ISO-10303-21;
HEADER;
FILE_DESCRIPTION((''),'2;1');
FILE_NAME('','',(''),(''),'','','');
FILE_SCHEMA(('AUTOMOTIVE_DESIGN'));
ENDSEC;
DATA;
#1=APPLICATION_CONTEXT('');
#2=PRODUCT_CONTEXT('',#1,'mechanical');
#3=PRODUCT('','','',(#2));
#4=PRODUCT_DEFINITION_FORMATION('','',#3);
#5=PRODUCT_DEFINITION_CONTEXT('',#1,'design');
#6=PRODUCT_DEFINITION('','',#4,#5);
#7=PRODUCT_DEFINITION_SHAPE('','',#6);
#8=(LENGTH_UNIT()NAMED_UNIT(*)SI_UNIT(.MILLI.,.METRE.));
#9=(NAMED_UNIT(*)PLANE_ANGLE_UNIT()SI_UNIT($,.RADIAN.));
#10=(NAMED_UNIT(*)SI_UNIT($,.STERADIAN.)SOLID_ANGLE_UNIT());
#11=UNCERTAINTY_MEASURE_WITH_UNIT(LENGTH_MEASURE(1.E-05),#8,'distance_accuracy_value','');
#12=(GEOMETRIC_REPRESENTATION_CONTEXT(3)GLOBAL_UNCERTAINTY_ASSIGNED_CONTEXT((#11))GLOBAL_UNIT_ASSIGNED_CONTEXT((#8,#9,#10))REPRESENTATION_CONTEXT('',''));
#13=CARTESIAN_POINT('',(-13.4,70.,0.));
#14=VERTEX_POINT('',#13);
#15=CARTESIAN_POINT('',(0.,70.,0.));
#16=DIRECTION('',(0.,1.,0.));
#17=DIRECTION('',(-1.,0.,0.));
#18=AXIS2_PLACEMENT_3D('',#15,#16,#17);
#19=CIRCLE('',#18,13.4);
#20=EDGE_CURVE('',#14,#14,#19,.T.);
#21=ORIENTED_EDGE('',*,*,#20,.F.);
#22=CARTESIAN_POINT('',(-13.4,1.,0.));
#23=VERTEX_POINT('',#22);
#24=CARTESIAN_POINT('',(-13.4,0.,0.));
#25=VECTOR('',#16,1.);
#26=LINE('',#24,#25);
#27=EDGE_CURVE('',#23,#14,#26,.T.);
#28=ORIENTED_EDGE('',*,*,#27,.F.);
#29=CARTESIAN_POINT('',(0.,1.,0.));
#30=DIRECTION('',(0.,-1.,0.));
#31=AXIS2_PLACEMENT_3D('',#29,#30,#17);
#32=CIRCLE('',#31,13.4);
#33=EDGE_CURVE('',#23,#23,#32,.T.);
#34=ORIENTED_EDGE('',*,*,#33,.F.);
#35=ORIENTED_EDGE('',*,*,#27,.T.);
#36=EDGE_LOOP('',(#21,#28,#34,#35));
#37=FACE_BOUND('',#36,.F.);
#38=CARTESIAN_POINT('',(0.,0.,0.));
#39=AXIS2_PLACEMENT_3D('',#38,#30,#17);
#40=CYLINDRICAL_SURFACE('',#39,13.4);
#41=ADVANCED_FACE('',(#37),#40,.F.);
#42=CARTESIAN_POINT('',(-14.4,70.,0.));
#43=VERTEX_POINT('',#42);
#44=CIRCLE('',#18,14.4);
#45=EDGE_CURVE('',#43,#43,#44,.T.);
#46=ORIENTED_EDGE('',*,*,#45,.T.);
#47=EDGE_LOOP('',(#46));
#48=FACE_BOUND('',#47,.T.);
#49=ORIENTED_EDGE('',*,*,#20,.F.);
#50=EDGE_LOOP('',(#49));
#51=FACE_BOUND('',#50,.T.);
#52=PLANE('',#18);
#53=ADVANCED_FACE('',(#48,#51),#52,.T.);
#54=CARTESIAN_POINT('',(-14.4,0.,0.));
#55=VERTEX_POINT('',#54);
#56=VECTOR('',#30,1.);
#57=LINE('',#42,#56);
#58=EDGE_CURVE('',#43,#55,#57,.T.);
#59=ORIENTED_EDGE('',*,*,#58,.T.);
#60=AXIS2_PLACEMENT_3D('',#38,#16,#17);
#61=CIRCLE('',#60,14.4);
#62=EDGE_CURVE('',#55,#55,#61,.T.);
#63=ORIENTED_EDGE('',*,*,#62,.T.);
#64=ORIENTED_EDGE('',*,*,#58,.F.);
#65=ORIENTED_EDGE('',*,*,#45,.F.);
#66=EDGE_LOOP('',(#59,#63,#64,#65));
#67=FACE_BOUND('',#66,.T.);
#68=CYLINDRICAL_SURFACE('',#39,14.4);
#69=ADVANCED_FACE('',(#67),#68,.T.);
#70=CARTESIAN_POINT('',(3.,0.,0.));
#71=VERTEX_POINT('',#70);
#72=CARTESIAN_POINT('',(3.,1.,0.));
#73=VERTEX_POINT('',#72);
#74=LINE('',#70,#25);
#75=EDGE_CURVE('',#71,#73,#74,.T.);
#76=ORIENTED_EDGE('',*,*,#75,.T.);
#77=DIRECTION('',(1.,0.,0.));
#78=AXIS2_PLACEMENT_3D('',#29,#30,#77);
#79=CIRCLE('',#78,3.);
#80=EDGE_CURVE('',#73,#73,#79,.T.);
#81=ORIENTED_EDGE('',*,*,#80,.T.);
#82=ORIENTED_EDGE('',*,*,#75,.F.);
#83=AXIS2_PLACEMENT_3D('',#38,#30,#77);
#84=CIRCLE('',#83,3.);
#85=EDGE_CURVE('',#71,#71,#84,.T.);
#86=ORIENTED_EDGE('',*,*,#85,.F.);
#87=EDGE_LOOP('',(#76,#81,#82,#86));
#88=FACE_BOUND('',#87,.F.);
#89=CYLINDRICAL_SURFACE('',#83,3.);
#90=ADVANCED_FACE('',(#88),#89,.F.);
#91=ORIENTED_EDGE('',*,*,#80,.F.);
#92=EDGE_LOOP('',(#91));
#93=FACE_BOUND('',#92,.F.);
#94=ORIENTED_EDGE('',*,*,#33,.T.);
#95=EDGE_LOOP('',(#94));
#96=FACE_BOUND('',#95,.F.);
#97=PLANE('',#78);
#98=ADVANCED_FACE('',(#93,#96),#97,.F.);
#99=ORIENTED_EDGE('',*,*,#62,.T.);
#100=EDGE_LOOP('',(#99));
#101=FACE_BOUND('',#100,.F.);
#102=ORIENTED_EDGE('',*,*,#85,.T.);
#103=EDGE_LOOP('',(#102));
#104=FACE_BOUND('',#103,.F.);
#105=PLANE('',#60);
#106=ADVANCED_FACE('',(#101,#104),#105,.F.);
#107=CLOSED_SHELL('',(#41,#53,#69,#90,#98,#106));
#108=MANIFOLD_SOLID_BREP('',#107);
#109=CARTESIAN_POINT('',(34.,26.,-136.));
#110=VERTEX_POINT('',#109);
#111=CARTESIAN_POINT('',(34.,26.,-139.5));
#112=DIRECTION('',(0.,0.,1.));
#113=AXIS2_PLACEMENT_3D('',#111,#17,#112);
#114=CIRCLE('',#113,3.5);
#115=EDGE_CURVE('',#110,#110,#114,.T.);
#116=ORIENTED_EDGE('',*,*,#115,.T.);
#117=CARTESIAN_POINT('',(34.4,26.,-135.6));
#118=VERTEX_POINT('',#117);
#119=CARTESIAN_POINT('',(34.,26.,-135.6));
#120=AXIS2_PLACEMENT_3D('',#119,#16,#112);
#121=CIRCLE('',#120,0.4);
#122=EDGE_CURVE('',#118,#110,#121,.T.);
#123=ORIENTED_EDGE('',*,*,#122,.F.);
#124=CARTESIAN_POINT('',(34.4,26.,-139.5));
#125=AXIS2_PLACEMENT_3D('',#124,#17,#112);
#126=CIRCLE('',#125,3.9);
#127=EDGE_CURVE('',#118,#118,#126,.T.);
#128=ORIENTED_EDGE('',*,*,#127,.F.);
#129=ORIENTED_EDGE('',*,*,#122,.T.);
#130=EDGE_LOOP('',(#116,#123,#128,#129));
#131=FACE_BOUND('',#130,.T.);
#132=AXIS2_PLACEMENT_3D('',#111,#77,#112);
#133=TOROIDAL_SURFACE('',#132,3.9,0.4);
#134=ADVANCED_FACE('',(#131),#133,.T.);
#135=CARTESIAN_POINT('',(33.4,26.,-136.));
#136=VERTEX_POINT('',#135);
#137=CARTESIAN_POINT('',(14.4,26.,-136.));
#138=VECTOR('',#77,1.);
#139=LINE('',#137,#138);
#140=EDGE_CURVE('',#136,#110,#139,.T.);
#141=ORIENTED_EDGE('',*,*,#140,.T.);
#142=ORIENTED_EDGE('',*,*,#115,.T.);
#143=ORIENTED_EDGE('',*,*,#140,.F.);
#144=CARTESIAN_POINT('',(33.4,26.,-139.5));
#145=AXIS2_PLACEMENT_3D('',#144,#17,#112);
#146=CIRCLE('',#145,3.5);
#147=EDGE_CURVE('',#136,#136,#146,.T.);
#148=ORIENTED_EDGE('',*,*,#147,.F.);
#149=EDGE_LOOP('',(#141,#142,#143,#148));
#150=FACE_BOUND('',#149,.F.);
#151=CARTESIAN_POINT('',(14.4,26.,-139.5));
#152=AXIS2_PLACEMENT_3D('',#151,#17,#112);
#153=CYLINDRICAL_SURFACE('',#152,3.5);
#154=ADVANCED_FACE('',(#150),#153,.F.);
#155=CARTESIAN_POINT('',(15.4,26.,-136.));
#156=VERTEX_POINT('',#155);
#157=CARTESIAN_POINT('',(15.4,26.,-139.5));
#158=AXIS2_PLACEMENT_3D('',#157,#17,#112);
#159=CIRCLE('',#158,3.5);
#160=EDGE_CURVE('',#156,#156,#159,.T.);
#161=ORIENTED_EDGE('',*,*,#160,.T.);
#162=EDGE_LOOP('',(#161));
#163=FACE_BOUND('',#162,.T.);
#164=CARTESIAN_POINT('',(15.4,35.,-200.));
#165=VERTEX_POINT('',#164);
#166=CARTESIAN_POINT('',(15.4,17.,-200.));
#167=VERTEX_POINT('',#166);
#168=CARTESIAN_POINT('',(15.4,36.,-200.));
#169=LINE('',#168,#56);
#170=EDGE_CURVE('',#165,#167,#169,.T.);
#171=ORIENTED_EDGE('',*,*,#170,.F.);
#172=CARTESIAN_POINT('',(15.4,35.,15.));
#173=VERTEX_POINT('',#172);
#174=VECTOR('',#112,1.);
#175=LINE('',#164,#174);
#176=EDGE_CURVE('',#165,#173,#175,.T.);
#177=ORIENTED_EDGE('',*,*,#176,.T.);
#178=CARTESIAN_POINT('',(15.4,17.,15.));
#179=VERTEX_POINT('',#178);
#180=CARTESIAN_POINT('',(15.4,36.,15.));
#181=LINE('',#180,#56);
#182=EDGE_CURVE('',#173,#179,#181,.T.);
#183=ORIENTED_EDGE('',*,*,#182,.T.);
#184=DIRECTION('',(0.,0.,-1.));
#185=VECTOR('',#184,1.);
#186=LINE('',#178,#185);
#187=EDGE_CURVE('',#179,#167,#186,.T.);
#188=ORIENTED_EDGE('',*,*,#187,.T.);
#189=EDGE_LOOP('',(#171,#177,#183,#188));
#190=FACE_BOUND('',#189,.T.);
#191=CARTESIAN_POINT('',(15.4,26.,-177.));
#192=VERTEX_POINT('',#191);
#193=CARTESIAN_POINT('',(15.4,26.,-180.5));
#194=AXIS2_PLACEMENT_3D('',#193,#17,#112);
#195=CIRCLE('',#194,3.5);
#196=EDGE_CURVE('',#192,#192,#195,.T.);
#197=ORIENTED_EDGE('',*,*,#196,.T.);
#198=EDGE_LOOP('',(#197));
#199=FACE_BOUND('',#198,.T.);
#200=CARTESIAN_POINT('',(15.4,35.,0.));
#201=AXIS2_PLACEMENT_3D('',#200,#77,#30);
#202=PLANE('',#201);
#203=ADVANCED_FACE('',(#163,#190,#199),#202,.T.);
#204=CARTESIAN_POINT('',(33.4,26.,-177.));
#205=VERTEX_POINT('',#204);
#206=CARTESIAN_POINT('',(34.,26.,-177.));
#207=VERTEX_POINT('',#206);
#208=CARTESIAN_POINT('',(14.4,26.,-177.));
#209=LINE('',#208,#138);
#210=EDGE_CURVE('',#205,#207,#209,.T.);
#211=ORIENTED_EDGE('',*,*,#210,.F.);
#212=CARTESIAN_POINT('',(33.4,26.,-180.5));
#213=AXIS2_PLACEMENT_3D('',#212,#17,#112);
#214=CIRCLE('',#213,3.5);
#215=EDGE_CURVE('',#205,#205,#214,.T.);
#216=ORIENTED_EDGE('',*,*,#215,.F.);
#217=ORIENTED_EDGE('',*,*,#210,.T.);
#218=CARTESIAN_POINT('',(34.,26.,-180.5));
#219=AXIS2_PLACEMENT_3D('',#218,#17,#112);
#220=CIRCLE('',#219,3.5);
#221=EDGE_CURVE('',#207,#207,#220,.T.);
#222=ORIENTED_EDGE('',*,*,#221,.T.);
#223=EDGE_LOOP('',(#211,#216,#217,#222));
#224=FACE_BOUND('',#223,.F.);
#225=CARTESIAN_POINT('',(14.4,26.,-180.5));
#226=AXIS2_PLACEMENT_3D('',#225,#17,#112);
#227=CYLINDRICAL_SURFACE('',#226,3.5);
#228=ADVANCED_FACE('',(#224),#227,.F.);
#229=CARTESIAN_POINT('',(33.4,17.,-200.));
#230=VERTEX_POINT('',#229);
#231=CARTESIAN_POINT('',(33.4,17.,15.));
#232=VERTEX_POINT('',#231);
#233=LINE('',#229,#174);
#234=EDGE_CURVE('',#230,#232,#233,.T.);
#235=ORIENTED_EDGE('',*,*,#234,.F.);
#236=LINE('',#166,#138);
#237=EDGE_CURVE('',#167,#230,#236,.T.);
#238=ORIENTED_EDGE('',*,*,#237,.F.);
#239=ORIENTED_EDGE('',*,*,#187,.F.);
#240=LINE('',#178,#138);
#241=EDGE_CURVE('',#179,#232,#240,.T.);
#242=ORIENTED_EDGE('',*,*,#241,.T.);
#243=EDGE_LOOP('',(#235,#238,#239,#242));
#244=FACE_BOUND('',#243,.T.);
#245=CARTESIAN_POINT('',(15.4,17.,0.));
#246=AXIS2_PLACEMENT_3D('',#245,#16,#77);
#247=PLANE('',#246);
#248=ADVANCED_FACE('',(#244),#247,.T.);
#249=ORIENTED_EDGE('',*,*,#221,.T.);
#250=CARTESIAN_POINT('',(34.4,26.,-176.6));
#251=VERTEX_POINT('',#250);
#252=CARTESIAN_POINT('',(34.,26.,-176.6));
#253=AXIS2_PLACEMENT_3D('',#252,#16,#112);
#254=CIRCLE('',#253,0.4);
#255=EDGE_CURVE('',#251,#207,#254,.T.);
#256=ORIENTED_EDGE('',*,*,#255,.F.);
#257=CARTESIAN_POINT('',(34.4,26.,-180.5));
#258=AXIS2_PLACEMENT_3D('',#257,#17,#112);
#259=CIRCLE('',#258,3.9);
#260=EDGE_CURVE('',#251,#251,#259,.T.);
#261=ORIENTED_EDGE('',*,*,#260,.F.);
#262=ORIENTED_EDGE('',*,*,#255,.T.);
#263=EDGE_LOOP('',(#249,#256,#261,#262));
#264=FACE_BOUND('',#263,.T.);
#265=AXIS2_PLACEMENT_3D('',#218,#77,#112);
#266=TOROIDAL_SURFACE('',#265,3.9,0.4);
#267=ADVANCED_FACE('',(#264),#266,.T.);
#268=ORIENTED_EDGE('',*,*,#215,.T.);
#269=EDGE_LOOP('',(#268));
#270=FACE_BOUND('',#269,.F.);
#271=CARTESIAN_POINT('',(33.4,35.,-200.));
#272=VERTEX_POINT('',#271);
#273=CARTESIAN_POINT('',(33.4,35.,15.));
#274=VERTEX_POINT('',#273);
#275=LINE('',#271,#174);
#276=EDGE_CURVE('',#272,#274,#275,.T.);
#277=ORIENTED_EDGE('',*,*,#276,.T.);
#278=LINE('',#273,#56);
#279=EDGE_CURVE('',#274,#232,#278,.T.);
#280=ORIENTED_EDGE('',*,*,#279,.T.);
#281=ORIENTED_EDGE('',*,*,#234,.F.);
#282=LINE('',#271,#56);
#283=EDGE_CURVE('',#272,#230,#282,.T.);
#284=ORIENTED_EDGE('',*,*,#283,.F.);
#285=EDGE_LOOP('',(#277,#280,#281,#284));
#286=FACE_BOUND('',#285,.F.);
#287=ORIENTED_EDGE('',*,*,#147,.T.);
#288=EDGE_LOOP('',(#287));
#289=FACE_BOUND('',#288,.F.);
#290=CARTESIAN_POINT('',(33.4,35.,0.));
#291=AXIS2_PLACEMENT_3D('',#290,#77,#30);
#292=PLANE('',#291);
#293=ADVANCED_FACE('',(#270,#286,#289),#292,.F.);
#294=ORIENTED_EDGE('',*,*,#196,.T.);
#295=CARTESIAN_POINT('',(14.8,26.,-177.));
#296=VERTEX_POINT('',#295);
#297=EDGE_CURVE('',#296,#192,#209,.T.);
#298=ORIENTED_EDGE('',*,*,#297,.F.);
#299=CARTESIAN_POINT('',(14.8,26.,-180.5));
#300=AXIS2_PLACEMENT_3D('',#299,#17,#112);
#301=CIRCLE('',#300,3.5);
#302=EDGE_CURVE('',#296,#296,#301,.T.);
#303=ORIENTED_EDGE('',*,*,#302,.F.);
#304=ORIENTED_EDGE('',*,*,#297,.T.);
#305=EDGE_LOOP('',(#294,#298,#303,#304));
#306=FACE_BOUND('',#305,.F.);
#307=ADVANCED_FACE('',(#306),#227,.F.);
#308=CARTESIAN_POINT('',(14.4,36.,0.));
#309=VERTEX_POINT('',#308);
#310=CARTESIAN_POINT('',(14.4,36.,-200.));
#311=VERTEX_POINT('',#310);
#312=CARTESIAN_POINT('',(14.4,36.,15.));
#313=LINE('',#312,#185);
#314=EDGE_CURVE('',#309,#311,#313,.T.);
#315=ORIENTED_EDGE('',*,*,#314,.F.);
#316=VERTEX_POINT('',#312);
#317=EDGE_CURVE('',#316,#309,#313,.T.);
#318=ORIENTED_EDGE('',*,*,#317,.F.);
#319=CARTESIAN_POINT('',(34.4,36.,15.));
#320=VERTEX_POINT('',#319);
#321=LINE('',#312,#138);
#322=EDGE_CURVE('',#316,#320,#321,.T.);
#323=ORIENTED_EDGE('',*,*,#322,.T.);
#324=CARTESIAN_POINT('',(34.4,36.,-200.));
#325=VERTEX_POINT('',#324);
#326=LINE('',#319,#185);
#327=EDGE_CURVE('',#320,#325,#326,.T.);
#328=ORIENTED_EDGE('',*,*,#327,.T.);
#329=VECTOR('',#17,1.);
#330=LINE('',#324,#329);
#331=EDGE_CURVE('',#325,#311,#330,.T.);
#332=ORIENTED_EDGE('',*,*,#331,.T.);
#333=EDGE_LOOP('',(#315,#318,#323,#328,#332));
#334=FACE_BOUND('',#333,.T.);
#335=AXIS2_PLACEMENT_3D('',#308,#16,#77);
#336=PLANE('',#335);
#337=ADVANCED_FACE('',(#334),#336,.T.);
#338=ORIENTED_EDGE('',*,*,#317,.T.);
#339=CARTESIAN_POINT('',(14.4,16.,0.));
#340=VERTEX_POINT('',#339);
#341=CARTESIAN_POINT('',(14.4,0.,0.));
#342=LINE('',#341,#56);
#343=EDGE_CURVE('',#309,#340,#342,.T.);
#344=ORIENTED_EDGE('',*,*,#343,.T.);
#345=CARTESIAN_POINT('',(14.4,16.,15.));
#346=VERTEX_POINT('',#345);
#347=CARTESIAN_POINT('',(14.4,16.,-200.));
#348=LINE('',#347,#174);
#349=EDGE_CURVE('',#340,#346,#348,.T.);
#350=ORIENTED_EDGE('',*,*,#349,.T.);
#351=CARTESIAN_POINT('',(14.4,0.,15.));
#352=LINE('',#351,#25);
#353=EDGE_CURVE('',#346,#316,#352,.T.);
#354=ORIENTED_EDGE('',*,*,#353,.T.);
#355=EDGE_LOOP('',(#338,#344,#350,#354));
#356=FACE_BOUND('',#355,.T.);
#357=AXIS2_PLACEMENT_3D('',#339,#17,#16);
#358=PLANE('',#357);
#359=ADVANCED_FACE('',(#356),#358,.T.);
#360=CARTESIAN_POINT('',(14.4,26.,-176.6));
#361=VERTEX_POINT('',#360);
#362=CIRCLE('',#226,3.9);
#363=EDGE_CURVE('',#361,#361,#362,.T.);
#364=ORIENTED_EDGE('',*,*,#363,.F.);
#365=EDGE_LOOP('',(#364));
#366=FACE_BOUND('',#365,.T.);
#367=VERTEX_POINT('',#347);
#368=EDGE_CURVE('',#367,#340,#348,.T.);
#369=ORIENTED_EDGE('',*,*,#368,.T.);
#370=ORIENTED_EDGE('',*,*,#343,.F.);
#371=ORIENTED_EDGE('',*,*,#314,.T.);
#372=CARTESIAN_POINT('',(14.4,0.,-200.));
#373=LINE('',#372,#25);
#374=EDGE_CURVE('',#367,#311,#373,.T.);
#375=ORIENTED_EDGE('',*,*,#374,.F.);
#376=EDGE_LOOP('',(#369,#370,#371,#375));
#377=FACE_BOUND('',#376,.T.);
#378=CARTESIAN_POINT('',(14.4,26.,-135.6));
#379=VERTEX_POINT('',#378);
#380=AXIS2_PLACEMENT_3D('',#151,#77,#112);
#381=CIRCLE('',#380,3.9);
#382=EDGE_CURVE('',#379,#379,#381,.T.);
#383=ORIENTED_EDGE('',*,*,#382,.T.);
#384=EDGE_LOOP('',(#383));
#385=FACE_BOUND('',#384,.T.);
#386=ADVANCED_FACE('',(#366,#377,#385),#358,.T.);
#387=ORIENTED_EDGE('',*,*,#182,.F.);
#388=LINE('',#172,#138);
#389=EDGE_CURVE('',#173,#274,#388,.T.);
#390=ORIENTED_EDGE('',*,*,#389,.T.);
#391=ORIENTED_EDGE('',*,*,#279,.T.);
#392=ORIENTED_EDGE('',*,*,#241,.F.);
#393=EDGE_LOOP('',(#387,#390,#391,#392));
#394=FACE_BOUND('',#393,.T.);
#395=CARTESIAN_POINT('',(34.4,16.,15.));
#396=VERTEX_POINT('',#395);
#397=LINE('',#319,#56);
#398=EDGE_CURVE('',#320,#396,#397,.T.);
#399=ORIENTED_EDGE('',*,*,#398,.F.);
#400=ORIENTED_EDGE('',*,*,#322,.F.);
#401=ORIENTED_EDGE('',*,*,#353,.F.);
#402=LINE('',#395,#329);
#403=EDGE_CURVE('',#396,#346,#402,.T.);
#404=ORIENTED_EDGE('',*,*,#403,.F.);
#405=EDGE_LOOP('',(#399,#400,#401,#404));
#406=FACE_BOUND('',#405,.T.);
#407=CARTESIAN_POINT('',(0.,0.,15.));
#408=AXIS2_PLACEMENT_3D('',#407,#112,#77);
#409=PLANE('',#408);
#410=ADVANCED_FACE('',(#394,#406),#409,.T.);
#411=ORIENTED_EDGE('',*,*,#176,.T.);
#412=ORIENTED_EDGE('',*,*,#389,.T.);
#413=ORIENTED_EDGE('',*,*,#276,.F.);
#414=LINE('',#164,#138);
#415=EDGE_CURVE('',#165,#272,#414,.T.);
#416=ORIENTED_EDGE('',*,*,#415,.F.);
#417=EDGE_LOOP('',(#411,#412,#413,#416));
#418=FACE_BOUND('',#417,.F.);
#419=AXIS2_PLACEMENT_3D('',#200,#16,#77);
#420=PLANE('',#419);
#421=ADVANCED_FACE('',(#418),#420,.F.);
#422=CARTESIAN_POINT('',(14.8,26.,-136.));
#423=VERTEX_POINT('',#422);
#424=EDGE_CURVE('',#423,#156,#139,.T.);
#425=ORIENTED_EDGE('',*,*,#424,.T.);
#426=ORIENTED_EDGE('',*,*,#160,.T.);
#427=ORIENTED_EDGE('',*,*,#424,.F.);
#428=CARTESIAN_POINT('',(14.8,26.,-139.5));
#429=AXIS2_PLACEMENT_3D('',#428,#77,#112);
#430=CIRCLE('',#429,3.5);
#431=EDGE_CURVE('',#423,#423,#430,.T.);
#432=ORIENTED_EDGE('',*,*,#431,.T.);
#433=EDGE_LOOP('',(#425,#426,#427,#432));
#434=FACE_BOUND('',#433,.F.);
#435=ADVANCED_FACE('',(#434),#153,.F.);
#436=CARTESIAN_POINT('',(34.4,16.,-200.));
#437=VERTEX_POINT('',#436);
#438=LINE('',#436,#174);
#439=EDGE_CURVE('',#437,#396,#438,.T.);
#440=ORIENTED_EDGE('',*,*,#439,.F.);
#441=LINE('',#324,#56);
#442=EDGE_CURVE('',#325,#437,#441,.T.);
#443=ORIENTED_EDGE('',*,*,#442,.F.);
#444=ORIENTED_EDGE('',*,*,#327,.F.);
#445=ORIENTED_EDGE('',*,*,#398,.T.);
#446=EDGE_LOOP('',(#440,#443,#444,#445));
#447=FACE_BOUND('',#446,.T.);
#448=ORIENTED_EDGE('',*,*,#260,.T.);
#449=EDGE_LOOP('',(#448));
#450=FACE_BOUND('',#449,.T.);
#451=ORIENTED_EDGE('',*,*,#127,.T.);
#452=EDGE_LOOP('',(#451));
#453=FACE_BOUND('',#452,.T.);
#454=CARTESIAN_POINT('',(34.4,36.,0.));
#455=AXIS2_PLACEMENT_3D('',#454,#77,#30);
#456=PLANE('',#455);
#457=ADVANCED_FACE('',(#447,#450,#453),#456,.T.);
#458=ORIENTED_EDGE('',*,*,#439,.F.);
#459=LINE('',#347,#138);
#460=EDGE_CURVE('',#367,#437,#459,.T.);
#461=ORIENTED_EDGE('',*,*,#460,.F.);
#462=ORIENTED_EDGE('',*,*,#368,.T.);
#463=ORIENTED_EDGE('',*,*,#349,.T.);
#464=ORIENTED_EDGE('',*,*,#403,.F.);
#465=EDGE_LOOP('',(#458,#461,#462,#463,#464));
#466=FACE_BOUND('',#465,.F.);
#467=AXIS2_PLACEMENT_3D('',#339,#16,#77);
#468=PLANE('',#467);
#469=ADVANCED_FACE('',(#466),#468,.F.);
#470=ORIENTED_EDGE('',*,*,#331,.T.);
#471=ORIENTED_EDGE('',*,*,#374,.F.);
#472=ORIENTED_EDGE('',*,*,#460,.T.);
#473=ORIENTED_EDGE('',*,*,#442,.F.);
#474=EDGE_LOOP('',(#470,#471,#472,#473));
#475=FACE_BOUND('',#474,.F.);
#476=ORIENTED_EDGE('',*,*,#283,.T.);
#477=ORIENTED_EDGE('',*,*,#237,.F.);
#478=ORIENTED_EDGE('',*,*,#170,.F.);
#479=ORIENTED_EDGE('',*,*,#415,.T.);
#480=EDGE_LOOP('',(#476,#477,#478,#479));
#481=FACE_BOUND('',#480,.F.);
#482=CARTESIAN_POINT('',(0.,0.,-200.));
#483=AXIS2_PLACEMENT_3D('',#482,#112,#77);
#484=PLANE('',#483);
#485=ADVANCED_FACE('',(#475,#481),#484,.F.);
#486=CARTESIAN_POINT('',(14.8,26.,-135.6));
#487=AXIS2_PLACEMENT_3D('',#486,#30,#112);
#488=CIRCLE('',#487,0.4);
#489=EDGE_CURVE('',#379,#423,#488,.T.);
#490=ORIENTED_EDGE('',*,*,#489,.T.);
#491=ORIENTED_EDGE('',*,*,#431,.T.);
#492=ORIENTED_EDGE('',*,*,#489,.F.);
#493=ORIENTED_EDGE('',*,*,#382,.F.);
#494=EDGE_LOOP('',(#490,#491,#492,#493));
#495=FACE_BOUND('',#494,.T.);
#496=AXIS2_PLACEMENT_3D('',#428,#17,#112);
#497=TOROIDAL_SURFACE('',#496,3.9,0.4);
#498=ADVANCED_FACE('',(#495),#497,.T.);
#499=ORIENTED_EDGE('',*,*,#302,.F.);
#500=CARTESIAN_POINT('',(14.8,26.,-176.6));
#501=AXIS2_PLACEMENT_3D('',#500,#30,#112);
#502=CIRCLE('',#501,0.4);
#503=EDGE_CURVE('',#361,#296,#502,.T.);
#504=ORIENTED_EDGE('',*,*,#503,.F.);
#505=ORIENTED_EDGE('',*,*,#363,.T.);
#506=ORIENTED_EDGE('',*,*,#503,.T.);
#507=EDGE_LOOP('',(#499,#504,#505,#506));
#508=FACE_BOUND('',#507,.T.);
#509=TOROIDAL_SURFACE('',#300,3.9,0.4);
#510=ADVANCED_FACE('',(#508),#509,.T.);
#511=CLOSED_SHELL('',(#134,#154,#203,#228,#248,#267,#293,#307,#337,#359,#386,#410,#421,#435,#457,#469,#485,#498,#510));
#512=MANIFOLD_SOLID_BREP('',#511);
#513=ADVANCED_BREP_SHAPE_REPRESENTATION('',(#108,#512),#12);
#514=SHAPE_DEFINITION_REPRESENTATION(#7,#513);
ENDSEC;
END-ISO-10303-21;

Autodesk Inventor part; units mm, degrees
ref_plane "YZ Plane" through (0, 0, 0) normal (1, 0, 0) x (0, 1, 0)
ref_plane "XZ Plane" through (0, 0, 0) normal (0, 1, 0) x (-1, 0, 0)
sketch "Esboço1" plane through (0, 0, 0) normal (0, 1, 0) x (-1, 0, 0)
  circle A0 centre (0, 0) radius 14.4
  circle A1 centre (0, 0) radius 13.4
  dimension "d0" = 28.8
  dimension "d1" = 1
extrude "Extrusão1" add sketch "Esboço1" along normal blind 70
sketch "Esboço2" plane through (0, 0, 0) normal (0, -1, 0) x (1, 0, 0)
  circle A0 centre (0, 0) radius 14.4
extrude "Extrusão2" add sketch "Esboço2" against normal blind 1
ref_plane "Plano de trabalho1" through (0, 0, 14.4) normal (0, 0, 1) x (1, 0, 0)
sketch "Esboço3" plane through (0, 0, 0) normal (0, 0, 1) x (1, 0, 0)
  line L0 (-14.4, 0) -> (14.4, 0) projected
  line L1 (14.4, 0) -> (14.4, 16)
  line L2 (14.4, 0) -> (14.4, 70) projected
  line L3 (14.4, 16) -> (34.4, 16)
  line L4 (14.4, 36) -> (14.4, 16)
  line L5 (34.4, 16) -> (14.4, 16)
  line L6 (14.4, 16) -> (14.4, 36)
  line L7 (14.4, 36) -> (34.4, 36)
  line L8 (34.4, 36) -> (34.4, 16)
  line L9 (34.4, 16) -> (14.4, 16)
  line L10 (14.4, 16) -> (14.4, 36)
  line L11 (15.4, 35) -> (33.4, 35)
  line L12 (33.4, 35) -> (33.4, 17)
  line L13 (15.4, 17) -> (33.4, 17)
  line L14 (15.4, 36) -> (15.4, 16)
  point P0 (0, 0)
  dimension "d7" = 16
  dimension "d8" = 20
  dimension "d11" = 1
  dimension "d12" = 1
  dimension "d13" = 1
extrude "Extrusão3" add sketch "Esboço3" along normal blind 15 and the other way blind 200 contours L2 L7 L14 L3 | L14 L13 L12 L11 L7 L8 L3
sketch "Esboço4" plane through (0, 0, 0) normal (0, -1, 0) x (1, 0, 0)
  circle A0 centre (0, 0) radius 3
  dimension "d18" = 6
extrude "Extrusão4" cut sketch "Esboço4" against normal blind 15
sketch "Esboço5" plane through (14.4, 16, 0) normal (-1, 0, 0) x (0, 0, 1)
  line L0 (-200, 1) -> (-200, 19) projected
  circle A0 centre (-180.5, 10) radius 3.5
  circle A1 centre (-139.5, 10) radius 3.5
  line L1 (-139.5, 10) -> (-180.5, 10)
  point P0 (0, -16)
  dimension "d33" = 7
  dimension "d34" = 41
extrude "Extrusão5" cut sketch "Esboço5" against normal blind 30
sketch "Esboço6" plane through (14.4, 16, 0) normal (-1, 0, 0) x (0, 0, 1)
  circle A0 centre (-180.5, 10) radius 3.5 projected
  circle A1 centre (-139.5, 10) radius 3.5 projected
  line L0 (-180.5, 10) -> (-139.5, 10)
  point P0 (0, -16)
extrude "Extrusão7" [suppressed]
fillet "Arredondamento1" radius 0.4 4 edges at (14.4, 26, -184) (14.4, 26, -143) (34.4, 26, -143) (34.4, 26, -184)
properties part number "base e suporte"
